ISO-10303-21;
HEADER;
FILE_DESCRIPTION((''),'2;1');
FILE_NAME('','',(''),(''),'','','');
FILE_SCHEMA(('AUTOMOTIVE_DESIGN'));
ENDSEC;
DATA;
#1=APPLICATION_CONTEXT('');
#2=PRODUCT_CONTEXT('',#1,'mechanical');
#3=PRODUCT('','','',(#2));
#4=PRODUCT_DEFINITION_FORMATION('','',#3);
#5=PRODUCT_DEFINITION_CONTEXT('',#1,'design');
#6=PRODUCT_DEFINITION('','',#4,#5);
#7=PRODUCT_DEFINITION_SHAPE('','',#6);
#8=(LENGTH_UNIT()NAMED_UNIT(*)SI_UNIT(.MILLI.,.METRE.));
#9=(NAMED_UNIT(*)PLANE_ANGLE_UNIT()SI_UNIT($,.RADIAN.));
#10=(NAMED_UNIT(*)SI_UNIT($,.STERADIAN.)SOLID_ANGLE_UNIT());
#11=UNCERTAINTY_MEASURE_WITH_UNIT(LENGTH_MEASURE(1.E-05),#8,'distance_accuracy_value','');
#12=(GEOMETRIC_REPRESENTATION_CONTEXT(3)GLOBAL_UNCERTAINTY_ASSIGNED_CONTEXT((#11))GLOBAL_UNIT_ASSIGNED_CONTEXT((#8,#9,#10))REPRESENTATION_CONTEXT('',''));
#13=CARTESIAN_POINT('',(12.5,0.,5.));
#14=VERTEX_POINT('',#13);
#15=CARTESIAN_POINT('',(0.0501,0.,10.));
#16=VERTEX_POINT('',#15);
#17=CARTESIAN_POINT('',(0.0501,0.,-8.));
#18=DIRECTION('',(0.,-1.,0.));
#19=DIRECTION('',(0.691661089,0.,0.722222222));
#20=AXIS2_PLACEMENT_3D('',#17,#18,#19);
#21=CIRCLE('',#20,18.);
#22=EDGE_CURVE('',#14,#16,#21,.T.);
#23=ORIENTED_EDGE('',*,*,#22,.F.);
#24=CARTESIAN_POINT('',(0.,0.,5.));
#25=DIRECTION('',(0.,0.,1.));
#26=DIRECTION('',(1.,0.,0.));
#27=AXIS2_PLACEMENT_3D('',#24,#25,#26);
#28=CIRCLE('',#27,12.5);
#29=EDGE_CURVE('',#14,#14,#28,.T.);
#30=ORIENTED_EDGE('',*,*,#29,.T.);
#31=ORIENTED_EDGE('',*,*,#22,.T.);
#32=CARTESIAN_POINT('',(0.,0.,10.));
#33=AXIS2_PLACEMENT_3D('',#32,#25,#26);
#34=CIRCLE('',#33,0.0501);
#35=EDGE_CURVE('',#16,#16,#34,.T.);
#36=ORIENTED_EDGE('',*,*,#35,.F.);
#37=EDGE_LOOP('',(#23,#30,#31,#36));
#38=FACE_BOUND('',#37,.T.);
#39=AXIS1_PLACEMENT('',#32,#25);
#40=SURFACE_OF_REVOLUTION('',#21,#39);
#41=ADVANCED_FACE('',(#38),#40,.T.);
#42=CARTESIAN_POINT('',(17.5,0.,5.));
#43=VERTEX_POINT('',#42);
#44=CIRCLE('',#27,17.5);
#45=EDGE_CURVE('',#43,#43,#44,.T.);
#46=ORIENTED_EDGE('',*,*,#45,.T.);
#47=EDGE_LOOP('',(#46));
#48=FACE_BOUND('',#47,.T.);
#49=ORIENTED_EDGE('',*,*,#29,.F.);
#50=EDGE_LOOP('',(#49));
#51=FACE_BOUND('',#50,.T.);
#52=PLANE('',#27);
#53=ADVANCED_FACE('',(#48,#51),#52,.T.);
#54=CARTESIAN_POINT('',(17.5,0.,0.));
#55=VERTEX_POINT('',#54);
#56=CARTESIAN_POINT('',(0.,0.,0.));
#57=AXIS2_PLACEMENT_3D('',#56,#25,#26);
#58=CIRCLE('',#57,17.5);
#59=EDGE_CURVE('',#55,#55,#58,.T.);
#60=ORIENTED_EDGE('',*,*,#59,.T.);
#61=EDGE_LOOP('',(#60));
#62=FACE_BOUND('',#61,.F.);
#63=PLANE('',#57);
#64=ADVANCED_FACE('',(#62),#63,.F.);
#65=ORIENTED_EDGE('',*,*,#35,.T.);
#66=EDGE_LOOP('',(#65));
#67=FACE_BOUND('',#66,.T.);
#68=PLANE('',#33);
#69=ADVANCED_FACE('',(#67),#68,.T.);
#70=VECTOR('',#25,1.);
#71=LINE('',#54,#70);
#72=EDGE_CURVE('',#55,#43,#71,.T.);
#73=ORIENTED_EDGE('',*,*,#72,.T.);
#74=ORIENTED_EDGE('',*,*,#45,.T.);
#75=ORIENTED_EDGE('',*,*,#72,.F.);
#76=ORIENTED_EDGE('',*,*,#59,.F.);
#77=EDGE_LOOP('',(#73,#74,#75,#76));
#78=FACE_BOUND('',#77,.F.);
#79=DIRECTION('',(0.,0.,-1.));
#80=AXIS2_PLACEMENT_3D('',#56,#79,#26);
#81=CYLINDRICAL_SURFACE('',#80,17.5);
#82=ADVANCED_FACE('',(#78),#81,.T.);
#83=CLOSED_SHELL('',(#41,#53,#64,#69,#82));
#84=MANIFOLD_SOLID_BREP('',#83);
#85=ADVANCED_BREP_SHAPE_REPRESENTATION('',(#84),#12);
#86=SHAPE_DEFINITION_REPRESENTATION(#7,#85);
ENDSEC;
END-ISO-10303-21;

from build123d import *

# Parameters (mm, degrees)
F0_R     = 17.5
F1_DEPTH = 5
F2_R     = 12.5
F3_DEPTH = 5


# Not quite as in the source:
# - a fillet or chamfer that OpenCascade refuses, or shapes differently, is made with other operations: its cross-section is extruded or revolved along the edge and cut away or added


with BuildPart() as f1:
    # F0 (on Top) → F1 (new body)
    with BuildSketch(Plane.XY):
        Circle(F0_R)
    extrude(amount=F1_DEPTH)

    # F2 (on face) → F3 (join)
    with BuildSketch(Plane.XY.offset(5)):
        Circle(F2_R)
    extrude(amount=F3_DEPTH)

    # F4: fillet of radius 18 on 1 edges, made by hand

    # F4_s1 → F4_t2 (revolve, cut)
    with BuildSketch(Plane.XZ):
        with BuildLine():
            ThreePointArc((12.5, 5), (6.7583043345, 8.7032930885), (0.050100402, 10))
            Line((0.050100402, 10), (0.050100402, 10.36))
            Line((0.050100402, 10.36), (12.5, 10.36))
            Line((12.5, 10.36), (12.86, 10))
            ThreePointArc((12.86, 10), (12.86, 7.5), (12.748997992, 5.26))
            Line((12.748997992, 5.26), (12.5, 5))
        make_face()
    revolve(axis=Axis((0, 0, 10), (0, 0, 1)), mode=Mode.SUBTRACT)


solid = f1.part
